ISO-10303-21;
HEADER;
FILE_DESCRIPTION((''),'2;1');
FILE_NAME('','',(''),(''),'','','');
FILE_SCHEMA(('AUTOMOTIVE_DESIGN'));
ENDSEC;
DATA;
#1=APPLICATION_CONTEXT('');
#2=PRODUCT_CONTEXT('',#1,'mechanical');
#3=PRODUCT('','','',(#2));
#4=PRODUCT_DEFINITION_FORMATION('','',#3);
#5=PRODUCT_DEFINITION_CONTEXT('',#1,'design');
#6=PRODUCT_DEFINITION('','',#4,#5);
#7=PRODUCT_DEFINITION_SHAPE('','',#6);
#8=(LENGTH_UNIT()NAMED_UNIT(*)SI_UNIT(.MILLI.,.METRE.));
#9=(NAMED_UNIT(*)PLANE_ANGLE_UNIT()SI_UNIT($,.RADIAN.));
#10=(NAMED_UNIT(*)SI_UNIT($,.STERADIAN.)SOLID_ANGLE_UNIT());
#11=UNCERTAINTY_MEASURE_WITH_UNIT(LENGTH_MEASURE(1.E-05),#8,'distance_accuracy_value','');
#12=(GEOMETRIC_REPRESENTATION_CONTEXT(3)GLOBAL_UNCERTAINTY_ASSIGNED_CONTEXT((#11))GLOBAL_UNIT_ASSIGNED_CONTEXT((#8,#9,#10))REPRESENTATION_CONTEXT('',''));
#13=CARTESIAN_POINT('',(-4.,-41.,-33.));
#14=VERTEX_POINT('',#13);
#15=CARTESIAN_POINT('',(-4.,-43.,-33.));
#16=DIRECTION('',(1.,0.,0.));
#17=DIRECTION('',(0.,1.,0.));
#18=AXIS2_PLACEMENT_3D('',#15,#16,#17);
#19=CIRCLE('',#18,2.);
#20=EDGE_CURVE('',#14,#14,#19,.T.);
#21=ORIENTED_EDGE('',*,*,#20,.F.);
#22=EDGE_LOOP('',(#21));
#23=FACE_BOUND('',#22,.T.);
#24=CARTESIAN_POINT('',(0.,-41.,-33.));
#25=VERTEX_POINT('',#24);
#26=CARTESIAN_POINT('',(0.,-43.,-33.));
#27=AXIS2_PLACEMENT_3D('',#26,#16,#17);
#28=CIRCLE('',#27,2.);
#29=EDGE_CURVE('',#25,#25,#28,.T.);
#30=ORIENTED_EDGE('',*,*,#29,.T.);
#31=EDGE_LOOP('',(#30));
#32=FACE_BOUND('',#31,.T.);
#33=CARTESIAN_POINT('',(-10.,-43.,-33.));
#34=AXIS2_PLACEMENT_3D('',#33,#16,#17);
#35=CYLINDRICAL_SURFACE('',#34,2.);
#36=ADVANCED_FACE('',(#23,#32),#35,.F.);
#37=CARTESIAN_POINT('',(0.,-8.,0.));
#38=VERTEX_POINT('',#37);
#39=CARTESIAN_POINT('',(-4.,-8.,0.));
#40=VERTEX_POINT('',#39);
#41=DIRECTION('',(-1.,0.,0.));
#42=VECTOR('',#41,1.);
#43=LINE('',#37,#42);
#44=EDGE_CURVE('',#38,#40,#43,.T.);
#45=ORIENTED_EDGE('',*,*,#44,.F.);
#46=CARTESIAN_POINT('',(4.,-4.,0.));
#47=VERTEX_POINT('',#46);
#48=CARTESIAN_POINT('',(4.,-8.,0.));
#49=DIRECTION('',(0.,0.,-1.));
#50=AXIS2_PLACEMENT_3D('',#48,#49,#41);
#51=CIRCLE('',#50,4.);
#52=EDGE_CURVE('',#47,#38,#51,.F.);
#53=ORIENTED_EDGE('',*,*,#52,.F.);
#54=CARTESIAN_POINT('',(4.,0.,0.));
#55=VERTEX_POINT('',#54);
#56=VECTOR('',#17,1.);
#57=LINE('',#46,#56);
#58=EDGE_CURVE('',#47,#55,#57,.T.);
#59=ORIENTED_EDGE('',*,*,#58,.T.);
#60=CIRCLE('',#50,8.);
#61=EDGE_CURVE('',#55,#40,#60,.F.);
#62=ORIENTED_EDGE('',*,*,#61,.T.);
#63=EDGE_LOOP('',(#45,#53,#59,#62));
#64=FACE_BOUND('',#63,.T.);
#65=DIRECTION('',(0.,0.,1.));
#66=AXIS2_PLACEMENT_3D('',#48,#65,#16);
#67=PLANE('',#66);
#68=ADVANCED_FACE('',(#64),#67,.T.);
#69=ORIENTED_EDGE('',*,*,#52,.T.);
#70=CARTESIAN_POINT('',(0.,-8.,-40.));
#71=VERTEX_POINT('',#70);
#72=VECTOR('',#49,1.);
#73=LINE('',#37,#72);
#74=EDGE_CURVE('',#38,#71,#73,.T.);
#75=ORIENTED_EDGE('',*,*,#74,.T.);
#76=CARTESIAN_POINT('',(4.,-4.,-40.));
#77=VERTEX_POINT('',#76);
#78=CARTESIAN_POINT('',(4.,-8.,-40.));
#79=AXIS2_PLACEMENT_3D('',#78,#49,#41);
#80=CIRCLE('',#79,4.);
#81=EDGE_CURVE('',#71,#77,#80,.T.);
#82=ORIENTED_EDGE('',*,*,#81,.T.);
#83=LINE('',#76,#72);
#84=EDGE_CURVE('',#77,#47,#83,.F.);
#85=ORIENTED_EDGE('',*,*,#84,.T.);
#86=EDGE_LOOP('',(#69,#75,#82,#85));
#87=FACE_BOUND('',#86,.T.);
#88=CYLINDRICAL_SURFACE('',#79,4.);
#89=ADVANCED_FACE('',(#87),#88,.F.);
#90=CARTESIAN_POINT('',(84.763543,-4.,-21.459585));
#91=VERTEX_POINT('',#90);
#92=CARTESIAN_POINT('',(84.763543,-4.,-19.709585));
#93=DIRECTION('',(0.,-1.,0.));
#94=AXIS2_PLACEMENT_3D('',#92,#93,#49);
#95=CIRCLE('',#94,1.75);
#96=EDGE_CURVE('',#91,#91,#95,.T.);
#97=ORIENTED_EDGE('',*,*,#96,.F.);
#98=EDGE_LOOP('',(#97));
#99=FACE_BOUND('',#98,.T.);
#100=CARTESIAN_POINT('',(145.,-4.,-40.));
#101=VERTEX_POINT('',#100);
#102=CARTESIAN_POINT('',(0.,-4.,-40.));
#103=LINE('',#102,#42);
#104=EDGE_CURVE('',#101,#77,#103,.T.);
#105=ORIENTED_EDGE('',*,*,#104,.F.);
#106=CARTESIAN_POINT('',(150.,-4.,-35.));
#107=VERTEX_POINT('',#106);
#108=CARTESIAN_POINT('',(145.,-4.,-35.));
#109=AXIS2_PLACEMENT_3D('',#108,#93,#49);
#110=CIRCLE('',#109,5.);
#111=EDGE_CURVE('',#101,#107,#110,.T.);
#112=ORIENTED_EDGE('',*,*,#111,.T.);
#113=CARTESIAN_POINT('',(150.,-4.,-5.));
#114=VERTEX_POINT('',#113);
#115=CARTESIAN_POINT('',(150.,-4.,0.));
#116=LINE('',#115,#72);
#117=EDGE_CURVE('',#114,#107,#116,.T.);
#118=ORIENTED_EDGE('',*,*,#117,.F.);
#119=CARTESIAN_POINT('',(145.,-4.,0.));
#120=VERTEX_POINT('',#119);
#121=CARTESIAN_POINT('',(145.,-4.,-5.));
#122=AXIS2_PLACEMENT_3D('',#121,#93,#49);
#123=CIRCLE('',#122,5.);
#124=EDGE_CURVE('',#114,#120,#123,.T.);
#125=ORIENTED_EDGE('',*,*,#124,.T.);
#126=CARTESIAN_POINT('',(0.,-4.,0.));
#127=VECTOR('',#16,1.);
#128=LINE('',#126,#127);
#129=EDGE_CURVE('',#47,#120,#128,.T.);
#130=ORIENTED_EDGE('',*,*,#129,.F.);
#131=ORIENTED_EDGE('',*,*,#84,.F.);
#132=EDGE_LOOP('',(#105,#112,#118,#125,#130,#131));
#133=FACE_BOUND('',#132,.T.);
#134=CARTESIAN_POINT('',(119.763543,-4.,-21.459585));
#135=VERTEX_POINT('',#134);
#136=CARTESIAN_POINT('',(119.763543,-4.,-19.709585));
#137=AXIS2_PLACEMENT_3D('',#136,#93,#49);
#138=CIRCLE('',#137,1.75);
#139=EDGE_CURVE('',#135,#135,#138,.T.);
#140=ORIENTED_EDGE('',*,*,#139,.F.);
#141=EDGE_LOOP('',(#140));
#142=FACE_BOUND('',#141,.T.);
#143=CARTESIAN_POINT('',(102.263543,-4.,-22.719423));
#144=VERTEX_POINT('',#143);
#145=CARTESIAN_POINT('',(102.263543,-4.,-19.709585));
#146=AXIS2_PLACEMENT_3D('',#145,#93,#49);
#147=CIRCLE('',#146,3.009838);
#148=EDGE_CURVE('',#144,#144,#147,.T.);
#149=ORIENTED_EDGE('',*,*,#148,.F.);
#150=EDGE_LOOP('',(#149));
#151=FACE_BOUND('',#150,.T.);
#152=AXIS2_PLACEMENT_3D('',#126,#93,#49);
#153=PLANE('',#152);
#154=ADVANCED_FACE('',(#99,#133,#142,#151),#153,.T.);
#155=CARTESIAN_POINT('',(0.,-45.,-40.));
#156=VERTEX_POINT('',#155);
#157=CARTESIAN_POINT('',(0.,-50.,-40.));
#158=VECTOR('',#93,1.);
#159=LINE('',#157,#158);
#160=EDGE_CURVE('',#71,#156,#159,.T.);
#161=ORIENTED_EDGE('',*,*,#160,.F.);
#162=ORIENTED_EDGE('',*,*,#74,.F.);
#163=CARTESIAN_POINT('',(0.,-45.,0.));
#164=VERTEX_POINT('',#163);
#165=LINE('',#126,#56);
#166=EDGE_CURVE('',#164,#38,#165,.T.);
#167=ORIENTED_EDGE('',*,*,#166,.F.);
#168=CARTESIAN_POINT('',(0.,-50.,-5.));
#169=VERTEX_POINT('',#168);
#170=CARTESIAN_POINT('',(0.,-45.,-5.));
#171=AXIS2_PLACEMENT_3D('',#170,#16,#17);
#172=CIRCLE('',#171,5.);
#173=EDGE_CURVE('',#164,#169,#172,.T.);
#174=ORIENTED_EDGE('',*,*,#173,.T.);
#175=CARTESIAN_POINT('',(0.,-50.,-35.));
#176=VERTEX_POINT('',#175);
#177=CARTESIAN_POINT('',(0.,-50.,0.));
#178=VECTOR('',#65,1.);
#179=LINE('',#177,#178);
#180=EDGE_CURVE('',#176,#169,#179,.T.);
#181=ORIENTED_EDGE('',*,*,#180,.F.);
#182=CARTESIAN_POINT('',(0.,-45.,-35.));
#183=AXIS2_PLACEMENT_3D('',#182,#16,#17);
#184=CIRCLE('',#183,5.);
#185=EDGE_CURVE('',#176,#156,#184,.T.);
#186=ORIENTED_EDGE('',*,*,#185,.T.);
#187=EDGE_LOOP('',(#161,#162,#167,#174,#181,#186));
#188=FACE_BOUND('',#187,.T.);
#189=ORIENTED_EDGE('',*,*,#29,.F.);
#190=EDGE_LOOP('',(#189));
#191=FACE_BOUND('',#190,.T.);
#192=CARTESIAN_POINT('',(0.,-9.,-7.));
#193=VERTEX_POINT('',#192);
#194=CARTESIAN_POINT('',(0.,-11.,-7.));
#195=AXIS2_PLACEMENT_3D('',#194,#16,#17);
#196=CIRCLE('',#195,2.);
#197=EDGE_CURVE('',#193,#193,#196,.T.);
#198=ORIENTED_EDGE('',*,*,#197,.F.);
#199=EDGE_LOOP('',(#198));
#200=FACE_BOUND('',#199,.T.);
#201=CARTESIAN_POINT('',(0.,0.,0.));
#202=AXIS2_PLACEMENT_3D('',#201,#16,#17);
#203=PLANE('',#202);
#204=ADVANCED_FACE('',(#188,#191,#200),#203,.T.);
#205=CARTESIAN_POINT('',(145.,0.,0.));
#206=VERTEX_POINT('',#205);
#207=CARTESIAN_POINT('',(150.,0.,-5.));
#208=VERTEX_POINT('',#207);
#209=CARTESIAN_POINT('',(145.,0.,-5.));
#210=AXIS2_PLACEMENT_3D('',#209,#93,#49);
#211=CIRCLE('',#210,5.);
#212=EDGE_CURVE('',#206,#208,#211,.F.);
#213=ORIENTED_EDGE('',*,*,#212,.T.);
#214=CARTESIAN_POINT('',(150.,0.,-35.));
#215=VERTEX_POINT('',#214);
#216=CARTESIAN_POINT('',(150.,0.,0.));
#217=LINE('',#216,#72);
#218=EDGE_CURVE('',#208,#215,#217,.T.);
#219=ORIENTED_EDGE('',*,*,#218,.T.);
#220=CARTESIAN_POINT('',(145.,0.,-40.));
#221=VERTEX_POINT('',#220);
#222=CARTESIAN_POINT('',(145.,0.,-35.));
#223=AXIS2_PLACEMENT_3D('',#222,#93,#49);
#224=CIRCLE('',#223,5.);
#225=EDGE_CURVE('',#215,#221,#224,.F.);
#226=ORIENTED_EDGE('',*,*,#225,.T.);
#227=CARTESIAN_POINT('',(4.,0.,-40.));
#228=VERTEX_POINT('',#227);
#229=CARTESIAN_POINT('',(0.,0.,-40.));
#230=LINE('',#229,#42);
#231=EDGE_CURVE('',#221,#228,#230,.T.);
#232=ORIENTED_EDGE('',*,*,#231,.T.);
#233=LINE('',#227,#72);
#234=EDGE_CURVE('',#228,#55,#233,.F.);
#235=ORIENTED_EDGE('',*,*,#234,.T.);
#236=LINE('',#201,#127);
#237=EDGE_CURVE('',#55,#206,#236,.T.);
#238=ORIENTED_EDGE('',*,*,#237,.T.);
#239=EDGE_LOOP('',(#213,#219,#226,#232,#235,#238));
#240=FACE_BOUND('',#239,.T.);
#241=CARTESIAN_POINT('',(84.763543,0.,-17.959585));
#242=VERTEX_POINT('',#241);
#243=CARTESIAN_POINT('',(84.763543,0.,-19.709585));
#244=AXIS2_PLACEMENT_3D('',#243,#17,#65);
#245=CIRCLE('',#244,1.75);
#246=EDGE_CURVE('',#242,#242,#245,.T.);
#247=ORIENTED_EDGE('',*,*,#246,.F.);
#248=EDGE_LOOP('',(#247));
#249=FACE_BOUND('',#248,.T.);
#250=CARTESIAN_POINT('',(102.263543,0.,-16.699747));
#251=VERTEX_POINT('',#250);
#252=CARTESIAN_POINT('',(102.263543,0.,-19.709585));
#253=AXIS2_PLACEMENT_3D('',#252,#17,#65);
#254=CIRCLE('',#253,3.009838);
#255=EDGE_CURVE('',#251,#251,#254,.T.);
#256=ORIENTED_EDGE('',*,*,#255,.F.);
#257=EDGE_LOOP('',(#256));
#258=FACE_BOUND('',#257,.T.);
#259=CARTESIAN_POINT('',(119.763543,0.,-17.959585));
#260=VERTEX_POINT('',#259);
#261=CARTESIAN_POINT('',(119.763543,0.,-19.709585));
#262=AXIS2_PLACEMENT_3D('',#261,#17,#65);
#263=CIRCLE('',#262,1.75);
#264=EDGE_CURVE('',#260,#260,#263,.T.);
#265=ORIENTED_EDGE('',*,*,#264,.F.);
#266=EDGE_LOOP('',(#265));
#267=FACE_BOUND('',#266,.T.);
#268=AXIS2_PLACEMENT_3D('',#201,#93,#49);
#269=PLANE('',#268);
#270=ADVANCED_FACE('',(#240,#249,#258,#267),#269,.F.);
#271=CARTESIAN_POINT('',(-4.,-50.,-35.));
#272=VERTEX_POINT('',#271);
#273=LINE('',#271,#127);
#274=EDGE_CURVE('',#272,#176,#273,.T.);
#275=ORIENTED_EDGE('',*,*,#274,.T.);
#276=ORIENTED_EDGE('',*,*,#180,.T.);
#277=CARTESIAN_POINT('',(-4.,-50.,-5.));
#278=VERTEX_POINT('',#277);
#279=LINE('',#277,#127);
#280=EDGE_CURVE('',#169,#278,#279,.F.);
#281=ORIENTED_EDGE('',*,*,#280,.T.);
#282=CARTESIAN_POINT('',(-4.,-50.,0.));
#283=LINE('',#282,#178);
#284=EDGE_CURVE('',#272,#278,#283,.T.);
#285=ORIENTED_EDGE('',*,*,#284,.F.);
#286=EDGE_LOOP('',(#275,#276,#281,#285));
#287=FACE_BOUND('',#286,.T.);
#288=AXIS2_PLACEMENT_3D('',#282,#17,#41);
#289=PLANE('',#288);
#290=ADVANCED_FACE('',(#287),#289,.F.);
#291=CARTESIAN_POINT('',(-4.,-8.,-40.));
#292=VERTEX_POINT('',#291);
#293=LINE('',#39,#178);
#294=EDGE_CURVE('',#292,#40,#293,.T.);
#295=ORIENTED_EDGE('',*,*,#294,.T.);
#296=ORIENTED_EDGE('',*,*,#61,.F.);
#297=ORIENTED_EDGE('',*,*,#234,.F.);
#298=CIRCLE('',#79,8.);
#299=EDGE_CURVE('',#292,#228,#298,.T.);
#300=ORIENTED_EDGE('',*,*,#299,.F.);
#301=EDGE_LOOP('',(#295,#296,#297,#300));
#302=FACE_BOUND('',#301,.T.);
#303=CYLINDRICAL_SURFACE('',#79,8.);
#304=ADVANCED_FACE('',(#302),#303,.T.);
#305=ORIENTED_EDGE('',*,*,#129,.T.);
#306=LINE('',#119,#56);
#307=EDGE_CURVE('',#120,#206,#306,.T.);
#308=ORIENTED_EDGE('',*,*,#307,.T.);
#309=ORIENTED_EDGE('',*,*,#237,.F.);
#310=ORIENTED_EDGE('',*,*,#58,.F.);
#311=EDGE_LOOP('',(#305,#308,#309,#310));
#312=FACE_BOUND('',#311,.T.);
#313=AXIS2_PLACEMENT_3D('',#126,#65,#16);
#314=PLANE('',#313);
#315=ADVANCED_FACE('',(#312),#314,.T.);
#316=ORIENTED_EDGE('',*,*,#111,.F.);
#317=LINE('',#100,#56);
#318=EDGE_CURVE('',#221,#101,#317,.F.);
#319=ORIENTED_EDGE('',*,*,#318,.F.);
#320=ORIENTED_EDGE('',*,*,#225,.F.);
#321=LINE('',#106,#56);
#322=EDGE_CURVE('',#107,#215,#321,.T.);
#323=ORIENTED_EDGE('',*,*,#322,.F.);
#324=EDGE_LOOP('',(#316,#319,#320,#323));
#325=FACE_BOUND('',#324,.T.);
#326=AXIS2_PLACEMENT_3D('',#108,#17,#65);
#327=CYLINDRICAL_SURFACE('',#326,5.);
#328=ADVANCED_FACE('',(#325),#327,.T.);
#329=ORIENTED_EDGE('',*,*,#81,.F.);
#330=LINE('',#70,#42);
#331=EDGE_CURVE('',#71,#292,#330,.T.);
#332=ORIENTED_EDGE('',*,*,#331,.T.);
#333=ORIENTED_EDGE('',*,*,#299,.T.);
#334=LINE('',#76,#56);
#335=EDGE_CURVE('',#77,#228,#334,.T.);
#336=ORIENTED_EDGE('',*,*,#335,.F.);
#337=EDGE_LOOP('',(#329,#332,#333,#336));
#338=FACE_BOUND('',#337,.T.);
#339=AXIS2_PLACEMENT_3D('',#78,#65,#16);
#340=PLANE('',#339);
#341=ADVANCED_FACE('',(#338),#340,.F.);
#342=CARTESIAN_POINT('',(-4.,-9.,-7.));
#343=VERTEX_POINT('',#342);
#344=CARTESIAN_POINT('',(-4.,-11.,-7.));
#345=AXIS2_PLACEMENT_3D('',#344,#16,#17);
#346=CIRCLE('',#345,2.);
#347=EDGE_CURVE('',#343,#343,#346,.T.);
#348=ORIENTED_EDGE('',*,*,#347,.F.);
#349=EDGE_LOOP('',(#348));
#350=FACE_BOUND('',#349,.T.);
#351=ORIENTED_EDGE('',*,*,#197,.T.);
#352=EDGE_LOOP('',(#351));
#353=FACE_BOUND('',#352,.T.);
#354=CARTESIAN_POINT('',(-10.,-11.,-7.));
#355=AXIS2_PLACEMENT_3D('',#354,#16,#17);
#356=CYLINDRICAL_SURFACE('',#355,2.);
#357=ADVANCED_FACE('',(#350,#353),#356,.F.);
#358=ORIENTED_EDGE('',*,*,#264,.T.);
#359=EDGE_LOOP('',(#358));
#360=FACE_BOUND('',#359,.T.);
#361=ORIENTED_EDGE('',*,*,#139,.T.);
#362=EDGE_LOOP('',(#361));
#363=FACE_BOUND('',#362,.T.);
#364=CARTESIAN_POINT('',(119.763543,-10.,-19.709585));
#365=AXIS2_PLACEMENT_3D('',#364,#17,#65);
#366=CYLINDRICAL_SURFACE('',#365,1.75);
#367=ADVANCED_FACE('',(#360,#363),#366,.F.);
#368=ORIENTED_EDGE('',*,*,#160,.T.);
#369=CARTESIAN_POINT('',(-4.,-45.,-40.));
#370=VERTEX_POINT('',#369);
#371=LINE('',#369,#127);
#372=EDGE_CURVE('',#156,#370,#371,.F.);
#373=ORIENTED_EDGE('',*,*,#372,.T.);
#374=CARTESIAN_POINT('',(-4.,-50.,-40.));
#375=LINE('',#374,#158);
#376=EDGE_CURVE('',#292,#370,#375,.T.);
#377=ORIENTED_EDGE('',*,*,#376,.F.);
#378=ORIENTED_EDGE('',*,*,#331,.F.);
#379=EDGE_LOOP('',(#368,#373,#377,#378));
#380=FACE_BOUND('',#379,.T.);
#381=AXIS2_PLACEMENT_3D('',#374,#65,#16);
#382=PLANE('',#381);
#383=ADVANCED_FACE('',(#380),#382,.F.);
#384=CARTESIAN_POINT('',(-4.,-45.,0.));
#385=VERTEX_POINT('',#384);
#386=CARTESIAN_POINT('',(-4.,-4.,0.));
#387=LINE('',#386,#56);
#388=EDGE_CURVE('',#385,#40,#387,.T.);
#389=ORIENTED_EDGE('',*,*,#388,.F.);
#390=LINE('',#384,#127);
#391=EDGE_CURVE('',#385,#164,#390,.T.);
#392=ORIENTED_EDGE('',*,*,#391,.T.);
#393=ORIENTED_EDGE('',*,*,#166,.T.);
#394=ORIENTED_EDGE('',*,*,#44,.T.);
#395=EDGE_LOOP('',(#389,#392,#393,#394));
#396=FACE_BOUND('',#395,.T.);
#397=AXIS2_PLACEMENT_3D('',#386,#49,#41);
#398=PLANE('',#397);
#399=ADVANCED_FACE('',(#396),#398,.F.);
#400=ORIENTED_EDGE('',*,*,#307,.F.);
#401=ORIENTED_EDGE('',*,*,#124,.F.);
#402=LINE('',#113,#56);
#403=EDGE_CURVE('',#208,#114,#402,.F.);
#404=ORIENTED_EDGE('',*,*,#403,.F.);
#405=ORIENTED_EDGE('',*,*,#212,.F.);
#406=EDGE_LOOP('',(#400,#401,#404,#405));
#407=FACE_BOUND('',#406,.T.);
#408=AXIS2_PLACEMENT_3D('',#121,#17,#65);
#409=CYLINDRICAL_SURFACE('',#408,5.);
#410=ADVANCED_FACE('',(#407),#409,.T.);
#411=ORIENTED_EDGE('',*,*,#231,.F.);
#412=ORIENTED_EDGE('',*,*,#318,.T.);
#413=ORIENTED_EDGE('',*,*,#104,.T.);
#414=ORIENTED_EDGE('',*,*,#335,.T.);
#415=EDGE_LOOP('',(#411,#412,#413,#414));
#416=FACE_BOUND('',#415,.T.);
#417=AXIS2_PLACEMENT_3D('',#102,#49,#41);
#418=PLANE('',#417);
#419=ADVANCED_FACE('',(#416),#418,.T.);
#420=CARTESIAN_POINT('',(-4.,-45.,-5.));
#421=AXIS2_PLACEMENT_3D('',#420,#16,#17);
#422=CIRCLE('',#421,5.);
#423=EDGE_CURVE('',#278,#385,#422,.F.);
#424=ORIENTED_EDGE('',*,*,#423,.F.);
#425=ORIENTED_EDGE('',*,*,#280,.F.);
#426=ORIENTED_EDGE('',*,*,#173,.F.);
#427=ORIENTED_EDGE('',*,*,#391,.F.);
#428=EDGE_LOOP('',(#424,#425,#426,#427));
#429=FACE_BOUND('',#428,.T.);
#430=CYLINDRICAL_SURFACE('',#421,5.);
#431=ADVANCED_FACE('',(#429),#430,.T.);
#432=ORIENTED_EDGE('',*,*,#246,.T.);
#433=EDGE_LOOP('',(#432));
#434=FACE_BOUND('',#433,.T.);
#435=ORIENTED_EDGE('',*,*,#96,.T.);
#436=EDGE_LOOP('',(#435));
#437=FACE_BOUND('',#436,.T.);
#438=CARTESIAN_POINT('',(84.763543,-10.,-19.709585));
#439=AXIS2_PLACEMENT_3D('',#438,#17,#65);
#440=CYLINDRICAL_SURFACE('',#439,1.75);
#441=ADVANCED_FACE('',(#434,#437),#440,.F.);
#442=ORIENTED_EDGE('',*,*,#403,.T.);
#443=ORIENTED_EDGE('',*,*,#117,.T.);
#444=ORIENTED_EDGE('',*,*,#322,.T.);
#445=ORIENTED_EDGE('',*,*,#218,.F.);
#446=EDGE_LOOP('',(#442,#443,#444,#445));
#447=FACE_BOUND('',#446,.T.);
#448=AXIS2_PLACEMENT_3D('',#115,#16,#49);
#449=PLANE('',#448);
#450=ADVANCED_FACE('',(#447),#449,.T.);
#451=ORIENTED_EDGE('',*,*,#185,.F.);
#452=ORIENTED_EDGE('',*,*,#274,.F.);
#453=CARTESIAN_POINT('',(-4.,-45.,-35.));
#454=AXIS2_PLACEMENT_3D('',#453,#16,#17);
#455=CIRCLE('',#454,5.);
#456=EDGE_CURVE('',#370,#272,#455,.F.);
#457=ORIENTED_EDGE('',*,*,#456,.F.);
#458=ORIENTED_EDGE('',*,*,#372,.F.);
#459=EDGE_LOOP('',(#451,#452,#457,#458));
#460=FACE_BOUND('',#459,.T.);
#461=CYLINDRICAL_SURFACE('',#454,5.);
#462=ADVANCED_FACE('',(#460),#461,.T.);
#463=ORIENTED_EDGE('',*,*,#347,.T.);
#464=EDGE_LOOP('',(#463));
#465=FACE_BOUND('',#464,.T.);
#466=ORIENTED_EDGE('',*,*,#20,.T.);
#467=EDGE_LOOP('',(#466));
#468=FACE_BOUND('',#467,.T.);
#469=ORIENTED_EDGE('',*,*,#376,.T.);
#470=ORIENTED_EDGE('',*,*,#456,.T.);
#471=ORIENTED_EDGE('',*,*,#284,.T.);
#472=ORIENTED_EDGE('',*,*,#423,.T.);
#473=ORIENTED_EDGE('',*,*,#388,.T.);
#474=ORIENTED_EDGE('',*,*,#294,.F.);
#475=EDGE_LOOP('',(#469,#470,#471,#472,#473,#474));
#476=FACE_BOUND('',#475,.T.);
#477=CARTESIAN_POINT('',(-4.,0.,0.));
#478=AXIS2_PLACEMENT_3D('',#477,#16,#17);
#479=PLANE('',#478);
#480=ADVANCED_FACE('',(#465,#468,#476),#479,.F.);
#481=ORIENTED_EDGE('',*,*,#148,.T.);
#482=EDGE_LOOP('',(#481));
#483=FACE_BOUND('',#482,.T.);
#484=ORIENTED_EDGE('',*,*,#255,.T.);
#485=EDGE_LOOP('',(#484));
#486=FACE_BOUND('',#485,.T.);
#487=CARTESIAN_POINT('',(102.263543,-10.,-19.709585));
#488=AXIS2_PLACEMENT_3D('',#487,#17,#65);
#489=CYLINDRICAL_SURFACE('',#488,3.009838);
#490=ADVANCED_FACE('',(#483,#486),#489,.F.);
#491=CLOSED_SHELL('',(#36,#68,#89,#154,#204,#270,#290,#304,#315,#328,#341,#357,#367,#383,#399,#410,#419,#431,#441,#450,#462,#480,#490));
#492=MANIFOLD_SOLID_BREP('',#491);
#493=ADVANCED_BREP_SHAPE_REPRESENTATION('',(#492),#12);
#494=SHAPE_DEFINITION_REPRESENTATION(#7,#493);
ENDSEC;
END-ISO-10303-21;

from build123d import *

# Parameters (mm, degrees)
SKETCH1_W                    = 150
SKETCH1_H                    = 40
BASE_FLANGE1_DEPTH           = 4
EDGE_FLANGE1_STRIP_W         = 24
EDGE_FLANGE1_STRIP_H         = 4
EDGE_FLANGE1_STRIP_CUT_DEPTH = 40
EDGE_FLANGE1_DEPTH           = 40
SKETCH9_R                    = 2
CUT_EXTRUDE1_DEPTH           = 10
FILLET1_R                    = 5
SKETCH10_R                   = 3.009837712
SKETCH10_R_2                 = 1.75
CUT_EXTRUDE2_DEPTH           = 10


# Sheet-metal steps are written as plain solids
with BuildPart() as part:
    # Sketch1 → Base-Flange1 (new body)
    with BuildSketch(Plane(origin=(0, 0, 0), x_dir=(1, 0, 0), z_dir=(0, 1, 0))):
        with Locations((75, 20)):
            Rectangle(SKETCH1_W, SKETCH1_H)
    extrude(amount=-BASE_FLANGE1_DEPTH)

    # Edge-Flange1 strip (across the edge) → Edge-Flange1 strip cut (cut)
    with BuildSketch(Plane(origin=(0, -4, 0), x_dir=(1, 0, 0), z_dir=(0, 0, -1))):
        with Locations((-8, -2)):
            Rectangle(EDGE_FLANGE1_STRIP_W, EDGE_FLANGE1_STRIP_H)
    extrude(amount=EDGE_FLANGE1_STRIP_CUT_DEPTH, mode=Mode.SUBTRACT)

    # Edge-Flange1 section (across the edge) → Edge-Flange1 (add)
    with BuildSketch(Plane(origin=(0, -4, 0), x_dir=(1, 0, 0), z_dir=(0, 0, -1))):
        with BuildLine():
            Line((-4, 4), (-4, 46))
            Line((-4, 46), (0, 46))
            Line((0, 46), (0, 4))
            ThreePointArc((0, 4), (1.171572875, 1.171572875), (4, 0))
            Line((4, 0), (4, -4))
            ThreePointArc((4, -4), (-1.656854249, -1.656854249), (-4, 4))
        make_face()
    extrude(amount=EDGE_FLANGE1_DEPTH)

    # Sketch9 → Cut-Extrude1 (cut)
    with BuildSketch(Plane(origin=(0, 0, 0), x_dir=(0, 0, -1), z_dir=(1, 0, 0))):
        with Locations(Location((7, -11, 0), (0, 0, 90))):
            Circle(SKETCH9_R)
        with Locations(Location((33, -43, 0), (0, 0, 90))):
            Circle(SKETCH9_R)
    extrude(amount=-CUT_EXTRUDE1_DEPTH, mode=Mode.SUBTRACT)

    # Fillet1
    fillet1_edges = [part.edges().sort_by_distance(p)[0] for p in [
        (-2, -50, 0),
        (-2, -50, -40),
        (150, -2, -40),
        (150, -2, 0),
    ]]
    fillet(fillet1_edges, radius=FILLET1_R)

    # Sketch10 → Cut-Extrude2 (cut)
    with BuildSketch(Plane(origin=(0, 0, 0), x_dir=(1, 0, 0), z_dir=(0, 1, 0))):
        with Locations(Location((102.263543229, 19.709585113, 0), (0, 0, 270))):
            Circle(SKETCH10_R)
        with Locations(Location((119.763543229, 19.709585113, 0), (0, 0, 270))):
            Circle(SKETCH10_R_2)
        with Locations(Location((84.763543229, 19.709585113, 0), (0, 0, 270))):
            Circle(SKETCH10_R_2)
    extrude(amount=-CUT_EXTRUDE2_DEPTH, mode=Mode.SUBTRACT)


solid = part.part
